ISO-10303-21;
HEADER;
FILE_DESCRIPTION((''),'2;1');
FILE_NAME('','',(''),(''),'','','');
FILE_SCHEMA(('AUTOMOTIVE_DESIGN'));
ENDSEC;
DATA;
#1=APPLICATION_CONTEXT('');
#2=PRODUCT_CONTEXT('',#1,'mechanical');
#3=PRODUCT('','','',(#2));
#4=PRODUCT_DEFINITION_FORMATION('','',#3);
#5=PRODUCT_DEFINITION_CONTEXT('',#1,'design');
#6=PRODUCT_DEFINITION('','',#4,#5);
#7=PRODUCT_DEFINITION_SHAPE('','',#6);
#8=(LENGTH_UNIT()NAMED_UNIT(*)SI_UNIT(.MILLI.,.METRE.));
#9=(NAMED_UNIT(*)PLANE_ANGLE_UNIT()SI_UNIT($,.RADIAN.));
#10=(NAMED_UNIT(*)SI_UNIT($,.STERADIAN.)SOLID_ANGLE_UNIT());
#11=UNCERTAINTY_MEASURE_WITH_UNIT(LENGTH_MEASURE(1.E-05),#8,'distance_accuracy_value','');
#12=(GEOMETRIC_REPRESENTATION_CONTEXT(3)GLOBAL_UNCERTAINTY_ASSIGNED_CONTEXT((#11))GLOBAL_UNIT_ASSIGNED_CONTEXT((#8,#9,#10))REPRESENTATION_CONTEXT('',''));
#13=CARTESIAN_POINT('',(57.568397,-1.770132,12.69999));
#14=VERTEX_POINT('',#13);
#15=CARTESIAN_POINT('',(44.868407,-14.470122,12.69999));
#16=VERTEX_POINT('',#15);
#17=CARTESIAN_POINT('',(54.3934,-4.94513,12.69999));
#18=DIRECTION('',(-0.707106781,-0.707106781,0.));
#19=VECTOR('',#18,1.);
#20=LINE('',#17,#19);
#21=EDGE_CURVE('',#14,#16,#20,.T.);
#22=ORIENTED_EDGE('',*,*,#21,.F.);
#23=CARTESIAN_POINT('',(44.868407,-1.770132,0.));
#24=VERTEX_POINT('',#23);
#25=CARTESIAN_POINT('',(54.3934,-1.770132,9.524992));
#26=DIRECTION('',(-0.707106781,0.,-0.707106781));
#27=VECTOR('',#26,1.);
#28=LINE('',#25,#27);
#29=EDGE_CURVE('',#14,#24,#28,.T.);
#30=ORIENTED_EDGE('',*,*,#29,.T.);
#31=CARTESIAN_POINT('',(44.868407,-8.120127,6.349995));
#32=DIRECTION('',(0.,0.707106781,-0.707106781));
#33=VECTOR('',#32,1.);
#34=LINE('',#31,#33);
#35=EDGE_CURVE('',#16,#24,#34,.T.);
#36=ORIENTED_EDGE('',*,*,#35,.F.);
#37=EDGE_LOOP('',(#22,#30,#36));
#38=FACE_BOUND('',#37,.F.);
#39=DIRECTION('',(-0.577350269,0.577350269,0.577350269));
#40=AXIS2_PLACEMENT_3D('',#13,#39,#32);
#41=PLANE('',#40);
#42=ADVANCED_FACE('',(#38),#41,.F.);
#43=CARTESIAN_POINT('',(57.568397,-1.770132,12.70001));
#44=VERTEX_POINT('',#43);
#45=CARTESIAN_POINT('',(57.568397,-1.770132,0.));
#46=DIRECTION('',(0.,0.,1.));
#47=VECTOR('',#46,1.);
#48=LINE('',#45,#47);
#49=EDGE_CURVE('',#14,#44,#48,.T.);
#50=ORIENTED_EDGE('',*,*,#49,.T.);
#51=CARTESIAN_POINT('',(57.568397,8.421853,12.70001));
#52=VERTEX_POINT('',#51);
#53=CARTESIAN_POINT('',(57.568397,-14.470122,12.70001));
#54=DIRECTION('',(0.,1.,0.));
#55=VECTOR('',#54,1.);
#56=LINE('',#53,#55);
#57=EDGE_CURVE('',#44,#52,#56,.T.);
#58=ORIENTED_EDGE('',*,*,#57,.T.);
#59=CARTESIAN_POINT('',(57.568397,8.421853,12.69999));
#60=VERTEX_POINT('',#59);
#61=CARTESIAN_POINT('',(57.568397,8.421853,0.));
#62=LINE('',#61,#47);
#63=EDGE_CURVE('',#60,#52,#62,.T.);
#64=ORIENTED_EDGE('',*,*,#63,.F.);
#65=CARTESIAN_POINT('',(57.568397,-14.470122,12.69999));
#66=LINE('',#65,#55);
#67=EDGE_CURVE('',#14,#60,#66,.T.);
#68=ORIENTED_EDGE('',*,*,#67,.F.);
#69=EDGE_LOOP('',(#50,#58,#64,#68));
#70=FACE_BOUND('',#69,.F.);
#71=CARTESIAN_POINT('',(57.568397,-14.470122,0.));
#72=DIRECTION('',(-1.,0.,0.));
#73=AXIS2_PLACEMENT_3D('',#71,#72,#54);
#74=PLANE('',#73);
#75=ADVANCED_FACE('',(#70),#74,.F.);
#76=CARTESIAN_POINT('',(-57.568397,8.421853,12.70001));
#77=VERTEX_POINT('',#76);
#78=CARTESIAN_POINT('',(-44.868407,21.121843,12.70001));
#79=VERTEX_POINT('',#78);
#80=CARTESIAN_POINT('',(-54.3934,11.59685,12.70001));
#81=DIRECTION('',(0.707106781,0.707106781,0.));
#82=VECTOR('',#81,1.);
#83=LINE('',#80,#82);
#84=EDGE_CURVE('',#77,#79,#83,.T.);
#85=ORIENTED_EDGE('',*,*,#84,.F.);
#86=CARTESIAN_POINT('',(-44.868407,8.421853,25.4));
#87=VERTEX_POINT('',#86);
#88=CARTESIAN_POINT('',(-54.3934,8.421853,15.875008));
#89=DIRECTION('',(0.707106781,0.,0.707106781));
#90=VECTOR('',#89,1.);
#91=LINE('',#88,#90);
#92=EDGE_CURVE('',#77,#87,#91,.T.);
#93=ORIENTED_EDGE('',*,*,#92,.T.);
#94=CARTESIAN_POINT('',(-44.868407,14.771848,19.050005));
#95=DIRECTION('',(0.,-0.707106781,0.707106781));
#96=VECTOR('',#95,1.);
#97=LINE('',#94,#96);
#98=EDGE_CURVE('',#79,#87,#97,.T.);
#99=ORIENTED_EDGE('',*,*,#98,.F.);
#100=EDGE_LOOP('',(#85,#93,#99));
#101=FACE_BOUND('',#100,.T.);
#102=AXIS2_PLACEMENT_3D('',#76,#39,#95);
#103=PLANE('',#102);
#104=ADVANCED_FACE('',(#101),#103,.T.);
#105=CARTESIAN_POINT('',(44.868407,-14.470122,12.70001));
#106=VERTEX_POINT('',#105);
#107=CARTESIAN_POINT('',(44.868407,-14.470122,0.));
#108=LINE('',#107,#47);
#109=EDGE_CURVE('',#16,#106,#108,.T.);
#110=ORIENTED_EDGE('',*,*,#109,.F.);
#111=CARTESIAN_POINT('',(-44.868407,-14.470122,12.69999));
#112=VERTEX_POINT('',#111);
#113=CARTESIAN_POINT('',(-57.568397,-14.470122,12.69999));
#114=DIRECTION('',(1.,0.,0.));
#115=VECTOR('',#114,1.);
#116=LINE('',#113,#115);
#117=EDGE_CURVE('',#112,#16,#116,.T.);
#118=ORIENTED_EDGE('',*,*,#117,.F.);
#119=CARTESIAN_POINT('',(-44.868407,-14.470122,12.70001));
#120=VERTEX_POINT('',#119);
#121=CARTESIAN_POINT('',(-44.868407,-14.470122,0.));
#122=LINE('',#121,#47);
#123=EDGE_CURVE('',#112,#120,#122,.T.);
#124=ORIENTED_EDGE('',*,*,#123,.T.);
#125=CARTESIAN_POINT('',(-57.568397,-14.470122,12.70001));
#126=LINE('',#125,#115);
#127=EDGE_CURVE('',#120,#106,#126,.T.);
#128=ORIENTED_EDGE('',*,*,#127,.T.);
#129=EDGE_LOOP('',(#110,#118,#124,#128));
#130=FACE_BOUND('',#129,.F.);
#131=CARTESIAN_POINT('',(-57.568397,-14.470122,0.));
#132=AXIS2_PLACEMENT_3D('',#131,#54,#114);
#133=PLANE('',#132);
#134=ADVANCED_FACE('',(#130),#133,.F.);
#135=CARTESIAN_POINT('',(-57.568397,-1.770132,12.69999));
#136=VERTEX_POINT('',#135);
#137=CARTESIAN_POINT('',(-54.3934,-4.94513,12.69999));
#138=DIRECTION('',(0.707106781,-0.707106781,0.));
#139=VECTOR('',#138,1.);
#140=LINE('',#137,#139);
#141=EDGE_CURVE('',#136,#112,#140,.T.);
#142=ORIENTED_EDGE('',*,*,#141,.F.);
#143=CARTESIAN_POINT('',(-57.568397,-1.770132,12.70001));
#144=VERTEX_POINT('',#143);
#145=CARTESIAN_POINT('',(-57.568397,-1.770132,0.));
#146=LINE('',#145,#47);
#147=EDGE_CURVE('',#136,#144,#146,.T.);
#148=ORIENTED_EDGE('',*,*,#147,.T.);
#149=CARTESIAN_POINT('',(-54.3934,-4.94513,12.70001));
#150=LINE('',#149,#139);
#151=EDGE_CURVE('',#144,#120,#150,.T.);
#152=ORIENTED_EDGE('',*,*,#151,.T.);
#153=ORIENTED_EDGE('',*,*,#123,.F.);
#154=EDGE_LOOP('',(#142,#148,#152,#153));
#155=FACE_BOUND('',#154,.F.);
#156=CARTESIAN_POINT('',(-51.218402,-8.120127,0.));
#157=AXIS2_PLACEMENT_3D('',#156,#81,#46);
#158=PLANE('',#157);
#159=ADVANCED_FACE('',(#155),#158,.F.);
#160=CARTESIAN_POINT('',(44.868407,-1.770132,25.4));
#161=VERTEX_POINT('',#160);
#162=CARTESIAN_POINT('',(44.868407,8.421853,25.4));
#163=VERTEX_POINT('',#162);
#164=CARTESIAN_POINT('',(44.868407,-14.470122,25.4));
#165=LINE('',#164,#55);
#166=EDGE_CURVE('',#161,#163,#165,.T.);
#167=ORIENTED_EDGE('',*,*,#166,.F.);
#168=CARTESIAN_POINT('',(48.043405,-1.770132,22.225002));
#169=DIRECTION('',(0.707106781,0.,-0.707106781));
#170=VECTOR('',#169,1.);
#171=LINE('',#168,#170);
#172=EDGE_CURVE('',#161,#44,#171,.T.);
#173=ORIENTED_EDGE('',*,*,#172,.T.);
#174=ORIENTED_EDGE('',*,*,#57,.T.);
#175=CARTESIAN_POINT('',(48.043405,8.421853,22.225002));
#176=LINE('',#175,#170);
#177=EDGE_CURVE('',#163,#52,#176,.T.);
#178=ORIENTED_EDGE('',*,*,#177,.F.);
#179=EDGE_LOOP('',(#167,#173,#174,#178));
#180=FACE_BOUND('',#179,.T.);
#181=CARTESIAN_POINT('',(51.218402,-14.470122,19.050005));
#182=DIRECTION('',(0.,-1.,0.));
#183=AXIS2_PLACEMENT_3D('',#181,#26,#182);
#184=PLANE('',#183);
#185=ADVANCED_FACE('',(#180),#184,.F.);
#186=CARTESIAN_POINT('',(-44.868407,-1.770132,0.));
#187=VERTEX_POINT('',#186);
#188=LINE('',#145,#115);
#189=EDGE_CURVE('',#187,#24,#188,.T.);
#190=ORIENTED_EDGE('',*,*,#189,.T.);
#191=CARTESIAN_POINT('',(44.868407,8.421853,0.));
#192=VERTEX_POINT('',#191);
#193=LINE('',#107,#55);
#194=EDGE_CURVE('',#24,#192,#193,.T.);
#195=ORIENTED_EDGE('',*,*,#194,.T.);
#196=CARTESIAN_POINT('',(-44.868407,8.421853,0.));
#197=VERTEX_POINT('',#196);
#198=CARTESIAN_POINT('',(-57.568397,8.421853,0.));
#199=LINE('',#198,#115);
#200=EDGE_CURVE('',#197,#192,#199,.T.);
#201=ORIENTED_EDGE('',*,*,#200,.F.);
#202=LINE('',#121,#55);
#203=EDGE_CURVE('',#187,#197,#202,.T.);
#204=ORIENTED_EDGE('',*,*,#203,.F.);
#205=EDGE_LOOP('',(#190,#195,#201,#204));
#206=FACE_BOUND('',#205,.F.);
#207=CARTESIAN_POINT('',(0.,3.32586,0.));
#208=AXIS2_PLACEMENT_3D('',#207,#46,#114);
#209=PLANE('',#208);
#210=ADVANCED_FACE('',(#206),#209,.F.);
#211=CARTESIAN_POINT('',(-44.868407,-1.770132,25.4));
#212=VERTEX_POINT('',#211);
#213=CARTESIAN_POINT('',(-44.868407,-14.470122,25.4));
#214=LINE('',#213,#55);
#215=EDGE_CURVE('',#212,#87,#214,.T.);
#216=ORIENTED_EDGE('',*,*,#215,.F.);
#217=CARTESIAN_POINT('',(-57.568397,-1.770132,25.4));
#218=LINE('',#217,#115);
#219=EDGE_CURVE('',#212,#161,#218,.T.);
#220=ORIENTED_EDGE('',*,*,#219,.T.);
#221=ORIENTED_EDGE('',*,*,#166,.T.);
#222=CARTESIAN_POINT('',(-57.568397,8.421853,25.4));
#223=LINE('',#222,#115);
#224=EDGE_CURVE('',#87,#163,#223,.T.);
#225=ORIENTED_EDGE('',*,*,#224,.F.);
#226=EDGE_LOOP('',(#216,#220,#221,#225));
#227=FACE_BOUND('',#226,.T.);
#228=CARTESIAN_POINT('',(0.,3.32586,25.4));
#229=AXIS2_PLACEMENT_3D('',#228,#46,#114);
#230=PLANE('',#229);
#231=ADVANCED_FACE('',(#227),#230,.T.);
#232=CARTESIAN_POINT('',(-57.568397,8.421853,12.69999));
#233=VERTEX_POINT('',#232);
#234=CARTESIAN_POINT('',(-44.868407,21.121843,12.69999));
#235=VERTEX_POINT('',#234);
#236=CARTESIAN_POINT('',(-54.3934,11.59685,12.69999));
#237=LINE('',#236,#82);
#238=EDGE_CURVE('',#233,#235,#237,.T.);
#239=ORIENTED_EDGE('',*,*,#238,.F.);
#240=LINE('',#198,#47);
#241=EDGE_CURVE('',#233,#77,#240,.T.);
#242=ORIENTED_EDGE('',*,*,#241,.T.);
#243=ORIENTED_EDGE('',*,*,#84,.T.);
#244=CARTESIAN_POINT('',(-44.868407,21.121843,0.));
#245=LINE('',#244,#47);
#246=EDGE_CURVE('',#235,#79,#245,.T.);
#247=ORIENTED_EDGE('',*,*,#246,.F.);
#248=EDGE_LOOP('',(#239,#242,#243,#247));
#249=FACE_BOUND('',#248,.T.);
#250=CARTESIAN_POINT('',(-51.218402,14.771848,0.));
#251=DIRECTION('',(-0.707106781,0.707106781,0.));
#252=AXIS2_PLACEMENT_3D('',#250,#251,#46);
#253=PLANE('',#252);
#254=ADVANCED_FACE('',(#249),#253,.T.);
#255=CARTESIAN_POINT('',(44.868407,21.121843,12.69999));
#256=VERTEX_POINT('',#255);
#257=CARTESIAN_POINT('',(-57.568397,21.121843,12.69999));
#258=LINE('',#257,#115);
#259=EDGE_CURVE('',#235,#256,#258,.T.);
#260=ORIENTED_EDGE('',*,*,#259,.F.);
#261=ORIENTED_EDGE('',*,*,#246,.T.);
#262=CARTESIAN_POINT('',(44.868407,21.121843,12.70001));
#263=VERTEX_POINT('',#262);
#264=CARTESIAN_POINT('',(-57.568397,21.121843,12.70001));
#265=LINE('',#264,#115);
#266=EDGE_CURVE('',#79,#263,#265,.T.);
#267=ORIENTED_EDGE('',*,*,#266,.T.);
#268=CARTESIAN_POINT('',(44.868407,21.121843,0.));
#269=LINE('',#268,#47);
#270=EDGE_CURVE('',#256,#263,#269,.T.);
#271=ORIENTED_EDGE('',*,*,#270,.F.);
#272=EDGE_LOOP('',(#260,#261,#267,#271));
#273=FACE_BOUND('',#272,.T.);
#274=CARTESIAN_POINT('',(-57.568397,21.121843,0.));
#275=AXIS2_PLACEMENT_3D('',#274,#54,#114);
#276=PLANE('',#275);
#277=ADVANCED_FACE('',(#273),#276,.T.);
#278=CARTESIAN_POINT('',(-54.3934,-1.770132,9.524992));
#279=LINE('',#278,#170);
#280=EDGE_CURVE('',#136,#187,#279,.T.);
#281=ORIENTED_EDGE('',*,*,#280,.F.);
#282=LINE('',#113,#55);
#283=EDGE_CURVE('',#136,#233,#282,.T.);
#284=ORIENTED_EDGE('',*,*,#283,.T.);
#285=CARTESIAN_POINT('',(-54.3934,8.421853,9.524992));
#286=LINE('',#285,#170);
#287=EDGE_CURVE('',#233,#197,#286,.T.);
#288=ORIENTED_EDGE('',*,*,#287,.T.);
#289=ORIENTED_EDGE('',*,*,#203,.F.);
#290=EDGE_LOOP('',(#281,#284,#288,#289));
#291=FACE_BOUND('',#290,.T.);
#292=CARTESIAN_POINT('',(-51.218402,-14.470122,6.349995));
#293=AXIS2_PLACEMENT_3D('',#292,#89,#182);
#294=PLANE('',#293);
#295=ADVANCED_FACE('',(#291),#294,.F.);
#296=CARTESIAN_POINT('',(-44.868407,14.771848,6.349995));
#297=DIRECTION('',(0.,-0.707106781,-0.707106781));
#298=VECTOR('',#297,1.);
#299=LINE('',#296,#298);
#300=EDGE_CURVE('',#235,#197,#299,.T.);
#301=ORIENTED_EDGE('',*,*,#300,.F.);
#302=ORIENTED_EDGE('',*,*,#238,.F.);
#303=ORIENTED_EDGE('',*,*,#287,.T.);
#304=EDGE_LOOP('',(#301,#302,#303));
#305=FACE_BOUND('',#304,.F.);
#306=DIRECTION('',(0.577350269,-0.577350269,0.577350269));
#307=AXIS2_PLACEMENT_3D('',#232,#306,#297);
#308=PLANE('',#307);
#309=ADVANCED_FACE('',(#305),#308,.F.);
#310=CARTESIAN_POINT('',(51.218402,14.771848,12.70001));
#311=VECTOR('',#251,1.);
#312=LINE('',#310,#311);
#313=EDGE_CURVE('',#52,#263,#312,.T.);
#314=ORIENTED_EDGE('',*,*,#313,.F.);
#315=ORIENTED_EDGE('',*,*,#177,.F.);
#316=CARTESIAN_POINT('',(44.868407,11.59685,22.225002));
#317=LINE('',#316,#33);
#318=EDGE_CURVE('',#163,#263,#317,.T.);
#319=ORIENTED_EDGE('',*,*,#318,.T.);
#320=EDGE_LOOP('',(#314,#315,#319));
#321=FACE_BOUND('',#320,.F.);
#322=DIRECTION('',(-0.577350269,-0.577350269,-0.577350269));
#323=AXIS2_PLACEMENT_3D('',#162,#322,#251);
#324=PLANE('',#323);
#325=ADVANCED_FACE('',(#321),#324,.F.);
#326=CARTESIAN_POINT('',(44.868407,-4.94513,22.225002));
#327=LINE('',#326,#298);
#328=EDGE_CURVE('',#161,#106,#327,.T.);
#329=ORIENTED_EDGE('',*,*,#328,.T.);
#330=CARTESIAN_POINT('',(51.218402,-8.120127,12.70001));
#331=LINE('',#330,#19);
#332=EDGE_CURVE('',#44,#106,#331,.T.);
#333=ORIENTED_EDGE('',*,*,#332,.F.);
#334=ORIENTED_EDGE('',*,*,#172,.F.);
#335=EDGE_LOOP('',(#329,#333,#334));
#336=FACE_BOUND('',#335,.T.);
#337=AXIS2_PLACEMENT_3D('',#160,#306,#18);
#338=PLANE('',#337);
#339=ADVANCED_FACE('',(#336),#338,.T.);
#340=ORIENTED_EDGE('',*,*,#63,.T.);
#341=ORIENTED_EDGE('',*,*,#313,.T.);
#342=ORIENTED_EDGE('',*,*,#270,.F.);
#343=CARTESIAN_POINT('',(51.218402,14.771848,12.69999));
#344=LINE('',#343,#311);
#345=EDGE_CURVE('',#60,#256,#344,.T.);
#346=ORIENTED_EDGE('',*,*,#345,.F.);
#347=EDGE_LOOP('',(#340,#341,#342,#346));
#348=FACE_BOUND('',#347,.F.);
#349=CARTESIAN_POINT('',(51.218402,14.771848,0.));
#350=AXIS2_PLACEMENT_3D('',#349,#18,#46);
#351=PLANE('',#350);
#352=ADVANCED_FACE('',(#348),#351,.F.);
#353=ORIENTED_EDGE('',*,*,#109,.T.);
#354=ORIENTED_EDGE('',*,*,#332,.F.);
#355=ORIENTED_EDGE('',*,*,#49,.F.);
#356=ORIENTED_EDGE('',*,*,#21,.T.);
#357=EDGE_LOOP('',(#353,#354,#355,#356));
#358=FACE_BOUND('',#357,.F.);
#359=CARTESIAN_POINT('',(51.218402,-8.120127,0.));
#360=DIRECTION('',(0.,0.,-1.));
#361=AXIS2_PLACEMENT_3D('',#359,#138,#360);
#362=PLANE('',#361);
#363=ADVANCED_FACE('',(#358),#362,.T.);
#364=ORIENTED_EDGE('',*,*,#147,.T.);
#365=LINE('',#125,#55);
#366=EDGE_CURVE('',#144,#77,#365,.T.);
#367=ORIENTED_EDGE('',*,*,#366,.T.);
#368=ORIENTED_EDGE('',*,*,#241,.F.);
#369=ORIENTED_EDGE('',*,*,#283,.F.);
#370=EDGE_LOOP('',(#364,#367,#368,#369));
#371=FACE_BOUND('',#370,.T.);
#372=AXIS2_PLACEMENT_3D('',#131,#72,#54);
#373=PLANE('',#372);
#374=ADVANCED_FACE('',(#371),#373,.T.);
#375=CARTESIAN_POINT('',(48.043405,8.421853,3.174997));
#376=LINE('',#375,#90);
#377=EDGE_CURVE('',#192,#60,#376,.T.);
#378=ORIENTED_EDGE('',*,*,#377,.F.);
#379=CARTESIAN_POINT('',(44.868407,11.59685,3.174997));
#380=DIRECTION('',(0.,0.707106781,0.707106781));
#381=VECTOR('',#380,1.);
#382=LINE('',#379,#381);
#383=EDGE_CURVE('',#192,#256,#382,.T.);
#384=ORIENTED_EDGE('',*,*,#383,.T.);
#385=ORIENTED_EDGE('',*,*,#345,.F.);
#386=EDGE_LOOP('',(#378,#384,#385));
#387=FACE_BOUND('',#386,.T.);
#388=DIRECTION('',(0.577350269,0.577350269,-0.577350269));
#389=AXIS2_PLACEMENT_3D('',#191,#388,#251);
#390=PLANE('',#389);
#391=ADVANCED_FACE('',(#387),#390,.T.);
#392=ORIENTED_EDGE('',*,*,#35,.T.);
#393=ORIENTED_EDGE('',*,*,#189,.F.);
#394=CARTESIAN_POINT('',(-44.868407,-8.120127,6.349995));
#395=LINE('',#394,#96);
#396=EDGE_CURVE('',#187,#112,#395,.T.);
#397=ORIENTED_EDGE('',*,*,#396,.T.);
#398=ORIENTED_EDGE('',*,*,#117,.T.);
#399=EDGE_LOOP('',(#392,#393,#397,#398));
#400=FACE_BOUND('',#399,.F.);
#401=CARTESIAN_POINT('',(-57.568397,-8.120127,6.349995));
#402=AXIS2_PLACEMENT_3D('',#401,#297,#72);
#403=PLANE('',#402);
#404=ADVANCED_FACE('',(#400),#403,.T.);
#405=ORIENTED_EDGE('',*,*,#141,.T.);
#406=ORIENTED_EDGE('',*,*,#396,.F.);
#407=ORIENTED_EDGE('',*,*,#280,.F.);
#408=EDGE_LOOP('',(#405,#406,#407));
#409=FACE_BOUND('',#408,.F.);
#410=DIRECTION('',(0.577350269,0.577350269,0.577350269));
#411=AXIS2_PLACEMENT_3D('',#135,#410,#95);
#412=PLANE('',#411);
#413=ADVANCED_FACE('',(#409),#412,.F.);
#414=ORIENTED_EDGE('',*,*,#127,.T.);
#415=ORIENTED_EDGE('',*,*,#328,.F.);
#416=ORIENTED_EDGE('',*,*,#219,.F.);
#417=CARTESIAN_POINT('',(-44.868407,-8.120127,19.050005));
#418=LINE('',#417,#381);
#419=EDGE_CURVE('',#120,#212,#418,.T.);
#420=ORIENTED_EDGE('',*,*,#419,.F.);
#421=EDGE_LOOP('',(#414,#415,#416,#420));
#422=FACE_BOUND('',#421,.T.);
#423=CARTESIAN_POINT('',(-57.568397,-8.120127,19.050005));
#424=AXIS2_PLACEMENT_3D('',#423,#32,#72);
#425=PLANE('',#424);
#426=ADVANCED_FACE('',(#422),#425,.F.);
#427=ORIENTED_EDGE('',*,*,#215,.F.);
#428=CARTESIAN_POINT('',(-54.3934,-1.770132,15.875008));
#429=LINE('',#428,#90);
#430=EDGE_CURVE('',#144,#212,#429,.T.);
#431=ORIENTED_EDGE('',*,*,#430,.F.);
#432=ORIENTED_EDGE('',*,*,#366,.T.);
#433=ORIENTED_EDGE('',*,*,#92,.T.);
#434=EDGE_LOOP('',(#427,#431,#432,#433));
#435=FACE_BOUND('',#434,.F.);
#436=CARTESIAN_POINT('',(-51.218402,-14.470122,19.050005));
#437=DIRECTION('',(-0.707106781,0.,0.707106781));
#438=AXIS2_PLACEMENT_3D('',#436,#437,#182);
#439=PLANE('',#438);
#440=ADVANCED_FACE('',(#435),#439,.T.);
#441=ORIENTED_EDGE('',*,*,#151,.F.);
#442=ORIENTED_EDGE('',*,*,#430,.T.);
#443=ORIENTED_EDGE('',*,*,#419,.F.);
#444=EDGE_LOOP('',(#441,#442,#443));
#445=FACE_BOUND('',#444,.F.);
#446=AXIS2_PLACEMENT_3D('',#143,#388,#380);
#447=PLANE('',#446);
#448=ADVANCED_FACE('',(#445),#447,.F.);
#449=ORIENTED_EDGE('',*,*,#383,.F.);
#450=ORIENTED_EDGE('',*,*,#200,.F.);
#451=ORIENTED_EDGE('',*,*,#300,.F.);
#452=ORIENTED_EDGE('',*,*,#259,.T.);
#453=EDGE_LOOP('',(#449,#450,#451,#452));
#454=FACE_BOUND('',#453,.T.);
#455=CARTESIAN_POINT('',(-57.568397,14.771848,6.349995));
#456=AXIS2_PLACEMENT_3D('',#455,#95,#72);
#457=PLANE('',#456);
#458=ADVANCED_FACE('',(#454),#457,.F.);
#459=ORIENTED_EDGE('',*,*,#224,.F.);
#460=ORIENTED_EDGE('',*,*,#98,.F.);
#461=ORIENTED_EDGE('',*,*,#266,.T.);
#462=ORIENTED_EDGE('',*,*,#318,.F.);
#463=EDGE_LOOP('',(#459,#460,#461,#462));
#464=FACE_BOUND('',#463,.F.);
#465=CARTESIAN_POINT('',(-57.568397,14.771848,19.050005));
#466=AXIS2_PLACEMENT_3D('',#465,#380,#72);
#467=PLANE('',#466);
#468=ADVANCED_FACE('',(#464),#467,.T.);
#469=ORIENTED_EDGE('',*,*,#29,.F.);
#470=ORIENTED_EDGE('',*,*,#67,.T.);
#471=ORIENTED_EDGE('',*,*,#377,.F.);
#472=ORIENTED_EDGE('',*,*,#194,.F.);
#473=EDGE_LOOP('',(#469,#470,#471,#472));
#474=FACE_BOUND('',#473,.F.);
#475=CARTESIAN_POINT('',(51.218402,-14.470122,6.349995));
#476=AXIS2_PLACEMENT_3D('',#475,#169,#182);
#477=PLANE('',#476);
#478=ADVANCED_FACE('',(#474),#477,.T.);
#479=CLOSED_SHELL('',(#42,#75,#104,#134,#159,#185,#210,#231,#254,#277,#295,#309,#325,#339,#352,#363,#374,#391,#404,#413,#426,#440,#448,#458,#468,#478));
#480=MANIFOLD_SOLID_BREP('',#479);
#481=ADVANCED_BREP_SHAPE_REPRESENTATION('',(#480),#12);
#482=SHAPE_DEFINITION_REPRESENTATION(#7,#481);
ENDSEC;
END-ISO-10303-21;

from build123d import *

# Parameters (mm, degrees)
F0_W     = 115.1367947459
F0_H     = 35.5919650756
F1_DEPTH = 25.4
F2_SIZE  = 12.69999


# Not quite as in the source:
# - a fillet or chamfer is up to 0.001 mm smaller than in the source, because OpenCascade refuses the exact size


with BuildPart() as f1:
    # F0 (on Top) → F1 (new body)
    with BuildSketch(Plane.XY):
        with Locations((0, 3.3258602489)):
            Rectangle(F0_W, F0_H)
    extrude(amount=F1_DEPTH)

    # F2 (size 12.7 in the source; OpenCascade refuses exactly that, so slightly less here)
    f2_edges = [f1.edges().sort_by_distance(p)[0] for p in [
        (0, -14.470122, 0),
        (57.568397, 21.121843, 12.7),
        (57.568397, -14.470122, 12.7),
        (57.568397, 3.32586, 0),
        (57.568397, 3.32586, 25.4),
        (0, 21.121843, 25.4),
        (0, 21.121843, 0),
        (-57.568397, 21.121843, 12.7),
        (0, -14.470122, 25.4),
        (-57.568397, 3.32586, 0),
        (-57.568397, -14.470122, 12.7),
        (-57.568397, 3.32586, 25.4),
    ]]
    chamfer(f2_edges, length=F2_SIZE)


solid = f1.part
